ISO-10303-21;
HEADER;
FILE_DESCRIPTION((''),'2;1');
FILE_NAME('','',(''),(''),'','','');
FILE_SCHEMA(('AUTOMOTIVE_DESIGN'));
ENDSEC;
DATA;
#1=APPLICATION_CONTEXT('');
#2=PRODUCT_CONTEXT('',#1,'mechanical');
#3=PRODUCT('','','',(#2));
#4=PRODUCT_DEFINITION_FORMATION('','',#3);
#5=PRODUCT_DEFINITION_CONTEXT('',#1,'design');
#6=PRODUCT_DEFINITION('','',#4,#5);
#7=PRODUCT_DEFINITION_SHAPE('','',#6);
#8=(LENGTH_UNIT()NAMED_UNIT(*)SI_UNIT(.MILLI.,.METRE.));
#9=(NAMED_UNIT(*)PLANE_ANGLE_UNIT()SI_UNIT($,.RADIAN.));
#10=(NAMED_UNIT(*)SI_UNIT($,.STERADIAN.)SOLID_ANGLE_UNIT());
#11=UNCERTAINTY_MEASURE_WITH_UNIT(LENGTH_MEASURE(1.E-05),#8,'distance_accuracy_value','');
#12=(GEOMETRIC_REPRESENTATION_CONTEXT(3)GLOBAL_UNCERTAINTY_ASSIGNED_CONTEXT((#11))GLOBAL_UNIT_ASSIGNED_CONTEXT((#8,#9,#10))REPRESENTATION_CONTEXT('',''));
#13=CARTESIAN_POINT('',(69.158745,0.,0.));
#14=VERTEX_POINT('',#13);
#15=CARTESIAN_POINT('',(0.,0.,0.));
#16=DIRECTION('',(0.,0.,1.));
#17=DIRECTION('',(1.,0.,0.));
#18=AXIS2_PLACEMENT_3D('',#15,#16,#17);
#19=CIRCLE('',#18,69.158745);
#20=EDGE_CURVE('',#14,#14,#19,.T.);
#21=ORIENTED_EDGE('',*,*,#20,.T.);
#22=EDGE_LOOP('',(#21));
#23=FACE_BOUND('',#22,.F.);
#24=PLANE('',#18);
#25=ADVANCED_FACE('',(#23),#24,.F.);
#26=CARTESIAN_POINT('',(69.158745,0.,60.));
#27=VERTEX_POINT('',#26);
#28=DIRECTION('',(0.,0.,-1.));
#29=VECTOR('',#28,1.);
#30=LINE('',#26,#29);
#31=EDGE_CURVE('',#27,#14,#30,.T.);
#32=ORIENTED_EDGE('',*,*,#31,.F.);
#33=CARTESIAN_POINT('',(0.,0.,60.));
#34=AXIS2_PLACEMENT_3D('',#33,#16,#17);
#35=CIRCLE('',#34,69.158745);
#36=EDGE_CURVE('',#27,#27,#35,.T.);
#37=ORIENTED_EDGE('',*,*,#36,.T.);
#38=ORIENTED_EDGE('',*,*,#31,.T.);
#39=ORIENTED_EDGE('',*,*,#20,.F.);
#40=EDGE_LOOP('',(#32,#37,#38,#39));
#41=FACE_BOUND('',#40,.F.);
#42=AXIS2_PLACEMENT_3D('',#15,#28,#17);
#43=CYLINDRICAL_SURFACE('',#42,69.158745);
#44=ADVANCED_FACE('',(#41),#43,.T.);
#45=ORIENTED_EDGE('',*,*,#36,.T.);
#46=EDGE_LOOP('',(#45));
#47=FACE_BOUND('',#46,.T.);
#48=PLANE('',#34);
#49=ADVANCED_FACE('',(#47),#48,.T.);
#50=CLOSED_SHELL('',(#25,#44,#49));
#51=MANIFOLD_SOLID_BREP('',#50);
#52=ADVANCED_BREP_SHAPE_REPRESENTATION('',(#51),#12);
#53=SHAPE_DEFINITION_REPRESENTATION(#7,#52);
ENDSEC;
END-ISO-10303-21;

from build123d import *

# Parameters (mm, degrees)
F1_R     = 69.1587452347
F2_DEPTH = 60
F3_R     = 69.1587452347
F3_R_2   = 35.7120494857
F4_DEPTH = 25


# Not quite as in the source:
# - the program builds the solid bodies; features that only make, move or delete a surface that nothing else refers to are left out


with BuildPart() as f2:
    # F1 (on face) → F2 (new body)
    with BuildSketch(Plane.XY):
        Circle(F1_R)
    extrude(amount=F2_DEPTH)

    # F3 (on face) → F4 (join)
    with BuildSketch(Plane.XY):
        Circle(F3_R)
        Circle(F3_R_2, mode=Mode.SUBTRACT)
    extrude(amount=F4_DEPTH)


solid = f2.part
